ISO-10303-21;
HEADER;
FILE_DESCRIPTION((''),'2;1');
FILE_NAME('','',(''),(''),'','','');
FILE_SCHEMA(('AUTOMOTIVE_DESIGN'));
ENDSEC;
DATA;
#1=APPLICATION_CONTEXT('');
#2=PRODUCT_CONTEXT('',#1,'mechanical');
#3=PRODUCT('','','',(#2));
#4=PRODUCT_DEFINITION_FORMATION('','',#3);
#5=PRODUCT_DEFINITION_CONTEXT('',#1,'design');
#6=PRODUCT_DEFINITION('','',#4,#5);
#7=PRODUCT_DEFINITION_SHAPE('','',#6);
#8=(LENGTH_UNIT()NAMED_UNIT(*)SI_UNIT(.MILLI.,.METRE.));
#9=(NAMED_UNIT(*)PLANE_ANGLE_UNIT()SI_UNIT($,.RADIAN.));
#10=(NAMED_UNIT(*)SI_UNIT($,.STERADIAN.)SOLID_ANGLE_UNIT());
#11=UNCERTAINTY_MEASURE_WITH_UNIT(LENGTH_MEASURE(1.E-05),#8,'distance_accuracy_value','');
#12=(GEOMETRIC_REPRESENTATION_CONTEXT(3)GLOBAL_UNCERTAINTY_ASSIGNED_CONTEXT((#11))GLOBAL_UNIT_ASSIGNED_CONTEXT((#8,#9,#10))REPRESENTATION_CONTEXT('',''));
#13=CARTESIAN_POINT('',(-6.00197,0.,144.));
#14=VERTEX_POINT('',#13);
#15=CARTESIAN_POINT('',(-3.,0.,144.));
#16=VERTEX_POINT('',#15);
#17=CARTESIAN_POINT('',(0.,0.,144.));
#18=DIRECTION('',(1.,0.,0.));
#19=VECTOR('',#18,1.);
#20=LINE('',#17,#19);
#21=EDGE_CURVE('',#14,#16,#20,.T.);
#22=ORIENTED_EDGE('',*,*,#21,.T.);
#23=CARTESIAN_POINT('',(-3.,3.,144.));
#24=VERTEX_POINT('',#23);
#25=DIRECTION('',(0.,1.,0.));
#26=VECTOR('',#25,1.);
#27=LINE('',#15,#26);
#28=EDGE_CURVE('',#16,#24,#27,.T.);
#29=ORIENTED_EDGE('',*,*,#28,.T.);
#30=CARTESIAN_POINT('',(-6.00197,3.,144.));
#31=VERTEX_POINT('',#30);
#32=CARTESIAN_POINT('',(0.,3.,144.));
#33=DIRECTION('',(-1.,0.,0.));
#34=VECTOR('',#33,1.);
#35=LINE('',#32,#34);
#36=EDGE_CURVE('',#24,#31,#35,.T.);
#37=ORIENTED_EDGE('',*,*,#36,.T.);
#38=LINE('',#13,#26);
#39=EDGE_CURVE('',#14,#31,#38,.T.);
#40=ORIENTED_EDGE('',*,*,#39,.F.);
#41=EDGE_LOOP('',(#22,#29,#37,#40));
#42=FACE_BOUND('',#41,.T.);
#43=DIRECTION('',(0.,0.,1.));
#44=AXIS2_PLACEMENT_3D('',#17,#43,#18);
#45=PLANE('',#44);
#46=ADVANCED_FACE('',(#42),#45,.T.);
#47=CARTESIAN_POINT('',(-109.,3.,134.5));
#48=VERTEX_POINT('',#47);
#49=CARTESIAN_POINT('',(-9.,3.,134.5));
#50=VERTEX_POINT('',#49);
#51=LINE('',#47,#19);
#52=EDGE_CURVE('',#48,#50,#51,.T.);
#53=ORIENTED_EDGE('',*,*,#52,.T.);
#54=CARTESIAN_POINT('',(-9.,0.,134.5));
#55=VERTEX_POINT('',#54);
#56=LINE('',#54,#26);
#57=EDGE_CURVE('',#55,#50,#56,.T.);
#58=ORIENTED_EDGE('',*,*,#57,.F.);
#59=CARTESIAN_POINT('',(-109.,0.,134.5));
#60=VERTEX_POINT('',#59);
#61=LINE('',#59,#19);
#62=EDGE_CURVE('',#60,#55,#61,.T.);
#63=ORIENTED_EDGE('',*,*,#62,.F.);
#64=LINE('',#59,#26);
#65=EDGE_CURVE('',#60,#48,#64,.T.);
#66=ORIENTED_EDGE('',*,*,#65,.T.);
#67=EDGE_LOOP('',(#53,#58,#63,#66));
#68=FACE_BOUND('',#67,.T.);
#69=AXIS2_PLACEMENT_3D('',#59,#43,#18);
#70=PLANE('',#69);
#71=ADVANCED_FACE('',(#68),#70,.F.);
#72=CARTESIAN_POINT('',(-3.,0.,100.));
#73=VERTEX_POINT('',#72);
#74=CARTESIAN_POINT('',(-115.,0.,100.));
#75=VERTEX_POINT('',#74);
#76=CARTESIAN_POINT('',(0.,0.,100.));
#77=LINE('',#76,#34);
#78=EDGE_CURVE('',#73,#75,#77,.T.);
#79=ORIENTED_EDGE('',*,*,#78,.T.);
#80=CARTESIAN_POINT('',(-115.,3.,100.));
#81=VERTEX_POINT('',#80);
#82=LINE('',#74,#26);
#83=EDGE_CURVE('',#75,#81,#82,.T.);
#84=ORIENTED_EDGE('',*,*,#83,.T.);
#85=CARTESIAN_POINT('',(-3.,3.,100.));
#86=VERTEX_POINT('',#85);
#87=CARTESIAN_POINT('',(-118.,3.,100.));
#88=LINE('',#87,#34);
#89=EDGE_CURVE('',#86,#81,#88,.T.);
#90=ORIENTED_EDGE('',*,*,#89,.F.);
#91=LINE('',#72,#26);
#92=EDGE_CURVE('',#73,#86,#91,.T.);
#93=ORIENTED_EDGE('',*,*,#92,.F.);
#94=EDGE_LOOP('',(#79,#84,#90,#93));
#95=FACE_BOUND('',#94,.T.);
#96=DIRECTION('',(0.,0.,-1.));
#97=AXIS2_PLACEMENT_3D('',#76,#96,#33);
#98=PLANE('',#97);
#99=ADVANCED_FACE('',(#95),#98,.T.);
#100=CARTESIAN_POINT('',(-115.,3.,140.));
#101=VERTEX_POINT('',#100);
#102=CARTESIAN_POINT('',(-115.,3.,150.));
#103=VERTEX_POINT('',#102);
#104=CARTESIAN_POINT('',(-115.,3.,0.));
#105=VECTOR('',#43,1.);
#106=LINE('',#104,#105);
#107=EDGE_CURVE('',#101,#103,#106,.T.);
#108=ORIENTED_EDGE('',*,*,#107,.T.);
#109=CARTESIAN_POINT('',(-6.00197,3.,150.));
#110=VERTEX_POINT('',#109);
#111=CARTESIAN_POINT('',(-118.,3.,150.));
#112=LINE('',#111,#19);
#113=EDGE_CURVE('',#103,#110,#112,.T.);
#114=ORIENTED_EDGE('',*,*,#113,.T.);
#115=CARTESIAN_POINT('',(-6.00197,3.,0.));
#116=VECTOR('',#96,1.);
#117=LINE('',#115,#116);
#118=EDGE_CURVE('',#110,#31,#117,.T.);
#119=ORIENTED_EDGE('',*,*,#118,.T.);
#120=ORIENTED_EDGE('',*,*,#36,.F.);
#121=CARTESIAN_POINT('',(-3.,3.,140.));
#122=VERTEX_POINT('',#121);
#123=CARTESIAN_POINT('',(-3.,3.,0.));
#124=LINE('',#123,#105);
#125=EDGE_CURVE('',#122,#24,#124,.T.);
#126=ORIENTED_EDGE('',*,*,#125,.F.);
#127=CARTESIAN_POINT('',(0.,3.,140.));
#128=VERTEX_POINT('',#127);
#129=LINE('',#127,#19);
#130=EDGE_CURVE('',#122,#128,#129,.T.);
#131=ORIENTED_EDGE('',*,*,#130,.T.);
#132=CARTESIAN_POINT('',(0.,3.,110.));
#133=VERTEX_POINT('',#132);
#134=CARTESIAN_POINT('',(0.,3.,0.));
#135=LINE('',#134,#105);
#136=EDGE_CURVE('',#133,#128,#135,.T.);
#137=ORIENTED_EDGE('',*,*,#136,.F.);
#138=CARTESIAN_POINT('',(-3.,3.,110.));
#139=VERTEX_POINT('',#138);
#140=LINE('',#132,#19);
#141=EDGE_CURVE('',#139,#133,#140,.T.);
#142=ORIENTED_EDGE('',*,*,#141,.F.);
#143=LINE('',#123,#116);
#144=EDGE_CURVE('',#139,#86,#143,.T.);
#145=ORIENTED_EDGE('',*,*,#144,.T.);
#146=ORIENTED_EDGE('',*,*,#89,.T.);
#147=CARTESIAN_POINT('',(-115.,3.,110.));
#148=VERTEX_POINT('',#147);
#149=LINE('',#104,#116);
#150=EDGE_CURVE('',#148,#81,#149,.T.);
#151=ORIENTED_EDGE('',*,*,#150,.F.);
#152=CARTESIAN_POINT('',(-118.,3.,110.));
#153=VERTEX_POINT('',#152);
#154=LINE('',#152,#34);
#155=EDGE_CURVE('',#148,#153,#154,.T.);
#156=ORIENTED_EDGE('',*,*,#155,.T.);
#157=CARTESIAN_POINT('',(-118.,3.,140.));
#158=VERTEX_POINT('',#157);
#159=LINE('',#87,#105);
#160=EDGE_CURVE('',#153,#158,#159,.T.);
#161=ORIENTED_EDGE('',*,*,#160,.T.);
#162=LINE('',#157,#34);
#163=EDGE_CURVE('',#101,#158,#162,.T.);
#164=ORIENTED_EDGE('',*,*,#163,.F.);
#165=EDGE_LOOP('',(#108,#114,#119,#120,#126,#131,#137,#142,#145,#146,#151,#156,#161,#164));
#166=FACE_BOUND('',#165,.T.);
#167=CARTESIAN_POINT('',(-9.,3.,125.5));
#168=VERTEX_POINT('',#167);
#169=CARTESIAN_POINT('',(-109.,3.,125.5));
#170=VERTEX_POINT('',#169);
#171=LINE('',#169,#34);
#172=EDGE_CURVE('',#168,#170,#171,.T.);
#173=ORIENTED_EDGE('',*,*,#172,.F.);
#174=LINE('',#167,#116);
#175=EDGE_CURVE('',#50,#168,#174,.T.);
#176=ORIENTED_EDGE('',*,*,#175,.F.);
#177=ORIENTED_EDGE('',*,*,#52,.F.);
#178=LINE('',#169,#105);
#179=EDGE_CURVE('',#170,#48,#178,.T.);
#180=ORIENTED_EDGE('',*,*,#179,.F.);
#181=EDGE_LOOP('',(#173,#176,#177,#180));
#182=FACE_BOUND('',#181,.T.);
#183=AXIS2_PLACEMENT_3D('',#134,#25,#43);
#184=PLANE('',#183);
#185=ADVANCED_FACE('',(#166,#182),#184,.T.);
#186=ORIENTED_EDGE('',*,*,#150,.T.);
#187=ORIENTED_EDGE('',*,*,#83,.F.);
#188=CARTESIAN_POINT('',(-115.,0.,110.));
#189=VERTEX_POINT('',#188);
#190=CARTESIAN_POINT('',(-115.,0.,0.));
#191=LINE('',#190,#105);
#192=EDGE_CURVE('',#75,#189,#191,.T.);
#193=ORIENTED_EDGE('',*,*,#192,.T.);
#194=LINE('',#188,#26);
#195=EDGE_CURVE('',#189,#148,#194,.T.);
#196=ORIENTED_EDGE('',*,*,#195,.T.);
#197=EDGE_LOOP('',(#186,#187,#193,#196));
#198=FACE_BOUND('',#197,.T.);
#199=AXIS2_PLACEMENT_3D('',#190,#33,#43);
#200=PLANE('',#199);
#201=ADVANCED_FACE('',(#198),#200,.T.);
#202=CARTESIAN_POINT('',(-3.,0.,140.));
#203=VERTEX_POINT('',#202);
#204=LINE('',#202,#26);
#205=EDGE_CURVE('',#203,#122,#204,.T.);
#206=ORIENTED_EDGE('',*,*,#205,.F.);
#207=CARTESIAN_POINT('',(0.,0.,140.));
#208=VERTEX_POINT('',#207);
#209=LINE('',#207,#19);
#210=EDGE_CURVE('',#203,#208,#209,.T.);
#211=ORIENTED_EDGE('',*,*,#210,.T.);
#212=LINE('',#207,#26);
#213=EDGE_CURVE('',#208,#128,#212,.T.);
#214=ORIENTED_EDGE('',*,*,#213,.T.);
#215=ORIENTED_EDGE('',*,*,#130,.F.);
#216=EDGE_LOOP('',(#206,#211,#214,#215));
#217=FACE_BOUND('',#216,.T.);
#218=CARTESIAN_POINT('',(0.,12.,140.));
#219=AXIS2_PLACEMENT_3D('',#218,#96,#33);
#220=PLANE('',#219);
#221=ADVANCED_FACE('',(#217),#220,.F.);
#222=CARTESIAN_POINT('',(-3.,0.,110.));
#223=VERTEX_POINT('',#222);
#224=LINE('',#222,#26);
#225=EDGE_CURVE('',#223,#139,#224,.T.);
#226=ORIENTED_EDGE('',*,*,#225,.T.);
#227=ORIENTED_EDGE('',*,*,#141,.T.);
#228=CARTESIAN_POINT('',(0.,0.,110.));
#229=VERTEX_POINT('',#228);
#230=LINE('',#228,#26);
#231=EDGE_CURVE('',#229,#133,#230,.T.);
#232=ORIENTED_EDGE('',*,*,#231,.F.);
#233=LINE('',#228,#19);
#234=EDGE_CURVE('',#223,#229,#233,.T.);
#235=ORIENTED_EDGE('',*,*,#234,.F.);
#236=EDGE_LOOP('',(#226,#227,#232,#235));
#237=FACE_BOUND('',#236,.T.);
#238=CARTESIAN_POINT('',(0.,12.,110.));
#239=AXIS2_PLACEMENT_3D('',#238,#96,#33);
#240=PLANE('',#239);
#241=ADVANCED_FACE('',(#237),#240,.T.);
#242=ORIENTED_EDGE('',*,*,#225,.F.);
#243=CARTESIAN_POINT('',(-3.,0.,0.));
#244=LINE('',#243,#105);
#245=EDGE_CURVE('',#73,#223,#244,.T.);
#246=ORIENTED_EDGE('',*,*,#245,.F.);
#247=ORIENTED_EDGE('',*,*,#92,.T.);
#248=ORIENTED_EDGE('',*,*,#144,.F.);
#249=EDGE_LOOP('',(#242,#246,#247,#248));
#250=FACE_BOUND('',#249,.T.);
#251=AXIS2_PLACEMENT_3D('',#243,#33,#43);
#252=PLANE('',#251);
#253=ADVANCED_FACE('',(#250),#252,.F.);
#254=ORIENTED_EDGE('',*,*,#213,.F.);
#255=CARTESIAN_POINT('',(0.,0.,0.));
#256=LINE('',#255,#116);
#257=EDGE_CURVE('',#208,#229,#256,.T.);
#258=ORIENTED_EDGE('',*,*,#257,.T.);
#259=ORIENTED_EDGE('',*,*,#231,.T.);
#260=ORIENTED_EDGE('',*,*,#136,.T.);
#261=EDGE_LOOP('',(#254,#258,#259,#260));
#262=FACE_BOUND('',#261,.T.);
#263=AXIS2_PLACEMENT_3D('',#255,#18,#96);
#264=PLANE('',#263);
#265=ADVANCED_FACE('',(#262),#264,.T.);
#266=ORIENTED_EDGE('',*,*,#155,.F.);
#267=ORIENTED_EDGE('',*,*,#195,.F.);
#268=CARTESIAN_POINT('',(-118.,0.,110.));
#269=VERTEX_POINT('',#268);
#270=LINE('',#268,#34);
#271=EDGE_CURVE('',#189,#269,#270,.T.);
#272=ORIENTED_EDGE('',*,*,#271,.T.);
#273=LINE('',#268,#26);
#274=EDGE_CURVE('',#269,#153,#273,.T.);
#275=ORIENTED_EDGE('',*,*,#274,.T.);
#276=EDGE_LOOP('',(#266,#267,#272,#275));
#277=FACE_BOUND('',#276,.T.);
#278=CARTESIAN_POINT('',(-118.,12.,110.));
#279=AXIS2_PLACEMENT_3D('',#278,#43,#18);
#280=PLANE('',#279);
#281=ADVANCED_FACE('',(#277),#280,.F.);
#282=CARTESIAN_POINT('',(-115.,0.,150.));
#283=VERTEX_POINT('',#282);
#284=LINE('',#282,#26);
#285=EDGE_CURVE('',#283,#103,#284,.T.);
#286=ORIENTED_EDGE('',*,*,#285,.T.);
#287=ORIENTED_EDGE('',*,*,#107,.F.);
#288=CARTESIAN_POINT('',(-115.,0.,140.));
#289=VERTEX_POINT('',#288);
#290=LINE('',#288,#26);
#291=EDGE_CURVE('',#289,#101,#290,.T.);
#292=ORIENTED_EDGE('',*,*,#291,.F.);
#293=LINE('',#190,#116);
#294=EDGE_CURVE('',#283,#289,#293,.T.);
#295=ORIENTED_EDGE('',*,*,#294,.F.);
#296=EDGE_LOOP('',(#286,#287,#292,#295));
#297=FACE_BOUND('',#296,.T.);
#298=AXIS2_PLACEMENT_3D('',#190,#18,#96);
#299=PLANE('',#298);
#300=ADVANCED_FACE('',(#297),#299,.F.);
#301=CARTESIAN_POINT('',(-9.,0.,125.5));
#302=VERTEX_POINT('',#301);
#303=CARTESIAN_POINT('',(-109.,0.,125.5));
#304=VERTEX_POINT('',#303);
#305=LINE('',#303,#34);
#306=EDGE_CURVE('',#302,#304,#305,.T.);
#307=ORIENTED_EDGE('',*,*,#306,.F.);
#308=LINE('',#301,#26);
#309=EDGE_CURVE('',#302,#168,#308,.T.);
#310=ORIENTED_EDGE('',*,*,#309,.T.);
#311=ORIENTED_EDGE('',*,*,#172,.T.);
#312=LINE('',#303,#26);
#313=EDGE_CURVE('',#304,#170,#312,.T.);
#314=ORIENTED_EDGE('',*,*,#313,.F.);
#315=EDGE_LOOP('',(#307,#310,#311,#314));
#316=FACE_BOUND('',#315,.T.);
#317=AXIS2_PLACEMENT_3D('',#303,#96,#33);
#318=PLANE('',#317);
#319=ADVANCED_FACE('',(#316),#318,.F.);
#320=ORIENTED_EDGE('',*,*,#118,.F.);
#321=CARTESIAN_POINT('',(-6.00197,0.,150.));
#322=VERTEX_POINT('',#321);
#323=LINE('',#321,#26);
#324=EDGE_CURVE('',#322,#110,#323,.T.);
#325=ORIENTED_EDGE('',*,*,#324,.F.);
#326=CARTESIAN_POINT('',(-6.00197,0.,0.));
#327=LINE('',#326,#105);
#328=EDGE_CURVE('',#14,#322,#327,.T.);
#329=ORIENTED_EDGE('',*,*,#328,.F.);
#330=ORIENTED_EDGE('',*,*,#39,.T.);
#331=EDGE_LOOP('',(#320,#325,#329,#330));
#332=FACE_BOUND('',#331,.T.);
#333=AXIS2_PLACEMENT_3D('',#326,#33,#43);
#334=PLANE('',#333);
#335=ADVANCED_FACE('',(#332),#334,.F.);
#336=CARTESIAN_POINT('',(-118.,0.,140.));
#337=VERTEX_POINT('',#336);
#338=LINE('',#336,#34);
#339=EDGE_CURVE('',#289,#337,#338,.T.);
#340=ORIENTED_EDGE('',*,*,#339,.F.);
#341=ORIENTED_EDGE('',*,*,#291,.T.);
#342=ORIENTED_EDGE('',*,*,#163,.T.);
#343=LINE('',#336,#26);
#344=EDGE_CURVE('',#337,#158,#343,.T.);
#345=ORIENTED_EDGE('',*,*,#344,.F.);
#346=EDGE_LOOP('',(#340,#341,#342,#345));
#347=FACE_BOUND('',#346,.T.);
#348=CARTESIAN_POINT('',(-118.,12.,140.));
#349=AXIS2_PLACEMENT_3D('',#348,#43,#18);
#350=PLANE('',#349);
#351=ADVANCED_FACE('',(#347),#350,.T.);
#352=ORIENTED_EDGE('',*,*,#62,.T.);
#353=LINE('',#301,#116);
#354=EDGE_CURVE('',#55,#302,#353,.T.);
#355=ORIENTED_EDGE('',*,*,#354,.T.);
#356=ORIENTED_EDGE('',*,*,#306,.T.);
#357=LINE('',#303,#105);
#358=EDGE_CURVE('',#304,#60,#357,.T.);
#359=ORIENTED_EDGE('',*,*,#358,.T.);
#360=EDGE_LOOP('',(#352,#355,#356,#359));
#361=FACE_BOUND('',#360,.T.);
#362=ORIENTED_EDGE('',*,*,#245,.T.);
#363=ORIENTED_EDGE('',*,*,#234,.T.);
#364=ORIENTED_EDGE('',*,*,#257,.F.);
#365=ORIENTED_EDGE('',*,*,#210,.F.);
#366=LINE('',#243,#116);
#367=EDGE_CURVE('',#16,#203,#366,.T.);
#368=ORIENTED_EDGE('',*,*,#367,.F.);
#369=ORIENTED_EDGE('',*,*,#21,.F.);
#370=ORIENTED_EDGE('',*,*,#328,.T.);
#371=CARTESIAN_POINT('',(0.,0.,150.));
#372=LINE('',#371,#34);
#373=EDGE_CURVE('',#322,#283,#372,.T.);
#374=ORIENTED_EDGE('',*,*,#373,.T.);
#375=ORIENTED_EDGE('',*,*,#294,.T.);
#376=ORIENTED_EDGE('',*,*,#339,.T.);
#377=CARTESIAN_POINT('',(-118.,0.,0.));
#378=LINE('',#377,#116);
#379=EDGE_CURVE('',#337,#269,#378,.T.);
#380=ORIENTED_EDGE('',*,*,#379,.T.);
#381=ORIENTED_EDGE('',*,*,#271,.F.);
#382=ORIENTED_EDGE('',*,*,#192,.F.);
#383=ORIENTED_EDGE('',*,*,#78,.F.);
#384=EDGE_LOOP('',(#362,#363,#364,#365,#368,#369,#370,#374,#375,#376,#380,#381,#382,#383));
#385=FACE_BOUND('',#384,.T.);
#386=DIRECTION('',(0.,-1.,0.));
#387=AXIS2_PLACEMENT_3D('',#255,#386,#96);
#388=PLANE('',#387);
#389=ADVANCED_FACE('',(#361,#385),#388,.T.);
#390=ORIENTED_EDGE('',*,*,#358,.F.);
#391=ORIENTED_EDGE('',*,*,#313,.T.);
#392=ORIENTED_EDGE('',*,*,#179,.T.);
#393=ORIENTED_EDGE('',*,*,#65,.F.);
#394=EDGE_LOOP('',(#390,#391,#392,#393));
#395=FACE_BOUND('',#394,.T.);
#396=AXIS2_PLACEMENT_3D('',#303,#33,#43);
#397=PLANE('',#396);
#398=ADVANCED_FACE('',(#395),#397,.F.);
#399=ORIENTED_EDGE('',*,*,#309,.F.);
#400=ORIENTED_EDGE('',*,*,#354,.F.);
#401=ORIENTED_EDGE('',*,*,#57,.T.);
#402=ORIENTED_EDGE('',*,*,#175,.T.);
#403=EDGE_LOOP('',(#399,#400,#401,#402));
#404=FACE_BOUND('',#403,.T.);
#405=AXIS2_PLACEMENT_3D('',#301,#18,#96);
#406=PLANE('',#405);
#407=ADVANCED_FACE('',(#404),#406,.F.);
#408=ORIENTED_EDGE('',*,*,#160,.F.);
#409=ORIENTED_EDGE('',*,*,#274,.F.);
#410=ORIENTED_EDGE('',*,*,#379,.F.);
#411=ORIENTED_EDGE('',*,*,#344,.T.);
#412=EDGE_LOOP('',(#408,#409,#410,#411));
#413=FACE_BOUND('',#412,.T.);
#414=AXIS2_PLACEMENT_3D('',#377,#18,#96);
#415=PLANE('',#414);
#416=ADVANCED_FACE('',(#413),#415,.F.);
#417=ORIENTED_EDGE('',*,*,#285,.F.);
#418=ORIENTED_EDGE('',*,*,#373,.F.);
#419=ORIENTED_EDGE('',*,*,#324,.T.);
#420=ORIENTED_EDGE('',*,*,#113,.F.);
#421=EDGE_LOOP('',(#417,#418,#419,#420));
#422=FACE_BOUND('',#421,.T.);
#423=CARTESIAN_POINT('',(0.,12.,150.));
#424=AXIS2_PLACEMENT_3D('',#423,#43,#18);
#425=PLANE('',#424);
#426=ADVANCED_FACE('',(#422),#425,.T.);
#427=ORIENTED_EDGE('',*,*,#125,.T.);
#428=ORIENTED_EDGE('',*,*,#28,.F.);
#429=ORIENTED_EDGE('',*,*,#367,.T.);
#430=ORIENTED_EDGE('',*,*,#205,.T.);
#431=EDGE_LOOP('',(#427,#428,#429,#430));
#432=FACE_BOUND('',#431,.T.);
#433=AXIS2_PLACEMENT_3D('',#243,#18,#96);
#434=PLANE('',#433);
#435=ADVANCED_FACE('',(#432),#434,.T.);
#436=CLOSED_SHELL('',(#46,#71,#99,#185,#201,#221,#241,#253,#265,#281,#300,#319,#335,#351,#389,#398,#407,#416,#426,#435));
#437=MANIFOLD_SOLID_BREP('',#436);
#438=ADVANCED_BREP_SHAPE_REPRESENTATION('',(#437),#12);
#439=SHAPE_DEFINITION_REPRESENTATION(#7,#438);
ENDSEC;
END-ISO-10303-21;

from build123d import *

# Parameters (mm, degrees)
LED_1_OUTLINE_R     = 2.25
LED_1_DEPTH         = 3
SKETCH_1_W          = 100
SKETCH_1_H          = 9
CUT_EXTRUDE_1_DEPTH = 3


# Read off the part's stored shape, not the designer's step: 基体零件-LED板-1
with BuildPart() as part:
    # 基体零件-LED板-1 outline → 基体零件-LED板-1 (new body)
    with BuildSketch(Plane(origin=(0, 0, 0), x_dir=(1, 0, 0), z_dir=(0, 1, 0))):
        Polygon((-3, -140), (0, -140), (0, -110), (-3, -110), (-3, -100), (-115, -100), (-115, -110), (-118, -110), (-118, -140), (-115, -140), (-115, -150), (-6.001970153, -150), (-6.001970153, -144), (-3, -144), align=None)
        with Locations((-90.5, -130)):
            Circle(LED_1_OUTLINE_R, mode=Mode.SUBTRACT)
        with Locations((-81.5, -130)):
            Circle(LED_1_OUTLINE_R, mode=Mode.SUBTRACT)
        with Locations((-72.5, -130)):
            Circle(LED_1_OUTLINE_R, mode=Mode.SUBTRACT)
        with Locations((-63.5, -130)):
            Circle(LED_1_OUTLINE_R, mode=Mode.SUBTRACT)
        with Locations((-54.5, -130)):
            Circle(LED_1_OUTLINE_R, mode=Mode.SUBTRACT)
        with Locations((-45.5, -130)):
            Circle(LED_1_OUTLINE_R, mode=Mode.SUBTRACT)
        with Locations((-36.5, -130)):
            Circle(LED_1_OUTLINE_R, mode=Mode.SUBTRACT)
        with Locations((-27.5, -130)):
            Circle(LED_1_OUTLINE_R, mode=Mode.SUBTRACT)
    extrude(amount=LED_1_DEPTH)

    # 草图1 → 切除-拉伸1 (cut)
    with BuildSketch(Plane(origin=(0, 3, 0), x_dir=(1, 0, 0), z_dir=(0, 1, 0))):
        with Locations((-59, -130)):
            Rectangle(SKETCH_1_W, SKETCH_1_H)
    extrude(amount=-CUT_EXTRUDE_1_DEPTH, mode=Mode.SUBTRACT)


solid = part.part
